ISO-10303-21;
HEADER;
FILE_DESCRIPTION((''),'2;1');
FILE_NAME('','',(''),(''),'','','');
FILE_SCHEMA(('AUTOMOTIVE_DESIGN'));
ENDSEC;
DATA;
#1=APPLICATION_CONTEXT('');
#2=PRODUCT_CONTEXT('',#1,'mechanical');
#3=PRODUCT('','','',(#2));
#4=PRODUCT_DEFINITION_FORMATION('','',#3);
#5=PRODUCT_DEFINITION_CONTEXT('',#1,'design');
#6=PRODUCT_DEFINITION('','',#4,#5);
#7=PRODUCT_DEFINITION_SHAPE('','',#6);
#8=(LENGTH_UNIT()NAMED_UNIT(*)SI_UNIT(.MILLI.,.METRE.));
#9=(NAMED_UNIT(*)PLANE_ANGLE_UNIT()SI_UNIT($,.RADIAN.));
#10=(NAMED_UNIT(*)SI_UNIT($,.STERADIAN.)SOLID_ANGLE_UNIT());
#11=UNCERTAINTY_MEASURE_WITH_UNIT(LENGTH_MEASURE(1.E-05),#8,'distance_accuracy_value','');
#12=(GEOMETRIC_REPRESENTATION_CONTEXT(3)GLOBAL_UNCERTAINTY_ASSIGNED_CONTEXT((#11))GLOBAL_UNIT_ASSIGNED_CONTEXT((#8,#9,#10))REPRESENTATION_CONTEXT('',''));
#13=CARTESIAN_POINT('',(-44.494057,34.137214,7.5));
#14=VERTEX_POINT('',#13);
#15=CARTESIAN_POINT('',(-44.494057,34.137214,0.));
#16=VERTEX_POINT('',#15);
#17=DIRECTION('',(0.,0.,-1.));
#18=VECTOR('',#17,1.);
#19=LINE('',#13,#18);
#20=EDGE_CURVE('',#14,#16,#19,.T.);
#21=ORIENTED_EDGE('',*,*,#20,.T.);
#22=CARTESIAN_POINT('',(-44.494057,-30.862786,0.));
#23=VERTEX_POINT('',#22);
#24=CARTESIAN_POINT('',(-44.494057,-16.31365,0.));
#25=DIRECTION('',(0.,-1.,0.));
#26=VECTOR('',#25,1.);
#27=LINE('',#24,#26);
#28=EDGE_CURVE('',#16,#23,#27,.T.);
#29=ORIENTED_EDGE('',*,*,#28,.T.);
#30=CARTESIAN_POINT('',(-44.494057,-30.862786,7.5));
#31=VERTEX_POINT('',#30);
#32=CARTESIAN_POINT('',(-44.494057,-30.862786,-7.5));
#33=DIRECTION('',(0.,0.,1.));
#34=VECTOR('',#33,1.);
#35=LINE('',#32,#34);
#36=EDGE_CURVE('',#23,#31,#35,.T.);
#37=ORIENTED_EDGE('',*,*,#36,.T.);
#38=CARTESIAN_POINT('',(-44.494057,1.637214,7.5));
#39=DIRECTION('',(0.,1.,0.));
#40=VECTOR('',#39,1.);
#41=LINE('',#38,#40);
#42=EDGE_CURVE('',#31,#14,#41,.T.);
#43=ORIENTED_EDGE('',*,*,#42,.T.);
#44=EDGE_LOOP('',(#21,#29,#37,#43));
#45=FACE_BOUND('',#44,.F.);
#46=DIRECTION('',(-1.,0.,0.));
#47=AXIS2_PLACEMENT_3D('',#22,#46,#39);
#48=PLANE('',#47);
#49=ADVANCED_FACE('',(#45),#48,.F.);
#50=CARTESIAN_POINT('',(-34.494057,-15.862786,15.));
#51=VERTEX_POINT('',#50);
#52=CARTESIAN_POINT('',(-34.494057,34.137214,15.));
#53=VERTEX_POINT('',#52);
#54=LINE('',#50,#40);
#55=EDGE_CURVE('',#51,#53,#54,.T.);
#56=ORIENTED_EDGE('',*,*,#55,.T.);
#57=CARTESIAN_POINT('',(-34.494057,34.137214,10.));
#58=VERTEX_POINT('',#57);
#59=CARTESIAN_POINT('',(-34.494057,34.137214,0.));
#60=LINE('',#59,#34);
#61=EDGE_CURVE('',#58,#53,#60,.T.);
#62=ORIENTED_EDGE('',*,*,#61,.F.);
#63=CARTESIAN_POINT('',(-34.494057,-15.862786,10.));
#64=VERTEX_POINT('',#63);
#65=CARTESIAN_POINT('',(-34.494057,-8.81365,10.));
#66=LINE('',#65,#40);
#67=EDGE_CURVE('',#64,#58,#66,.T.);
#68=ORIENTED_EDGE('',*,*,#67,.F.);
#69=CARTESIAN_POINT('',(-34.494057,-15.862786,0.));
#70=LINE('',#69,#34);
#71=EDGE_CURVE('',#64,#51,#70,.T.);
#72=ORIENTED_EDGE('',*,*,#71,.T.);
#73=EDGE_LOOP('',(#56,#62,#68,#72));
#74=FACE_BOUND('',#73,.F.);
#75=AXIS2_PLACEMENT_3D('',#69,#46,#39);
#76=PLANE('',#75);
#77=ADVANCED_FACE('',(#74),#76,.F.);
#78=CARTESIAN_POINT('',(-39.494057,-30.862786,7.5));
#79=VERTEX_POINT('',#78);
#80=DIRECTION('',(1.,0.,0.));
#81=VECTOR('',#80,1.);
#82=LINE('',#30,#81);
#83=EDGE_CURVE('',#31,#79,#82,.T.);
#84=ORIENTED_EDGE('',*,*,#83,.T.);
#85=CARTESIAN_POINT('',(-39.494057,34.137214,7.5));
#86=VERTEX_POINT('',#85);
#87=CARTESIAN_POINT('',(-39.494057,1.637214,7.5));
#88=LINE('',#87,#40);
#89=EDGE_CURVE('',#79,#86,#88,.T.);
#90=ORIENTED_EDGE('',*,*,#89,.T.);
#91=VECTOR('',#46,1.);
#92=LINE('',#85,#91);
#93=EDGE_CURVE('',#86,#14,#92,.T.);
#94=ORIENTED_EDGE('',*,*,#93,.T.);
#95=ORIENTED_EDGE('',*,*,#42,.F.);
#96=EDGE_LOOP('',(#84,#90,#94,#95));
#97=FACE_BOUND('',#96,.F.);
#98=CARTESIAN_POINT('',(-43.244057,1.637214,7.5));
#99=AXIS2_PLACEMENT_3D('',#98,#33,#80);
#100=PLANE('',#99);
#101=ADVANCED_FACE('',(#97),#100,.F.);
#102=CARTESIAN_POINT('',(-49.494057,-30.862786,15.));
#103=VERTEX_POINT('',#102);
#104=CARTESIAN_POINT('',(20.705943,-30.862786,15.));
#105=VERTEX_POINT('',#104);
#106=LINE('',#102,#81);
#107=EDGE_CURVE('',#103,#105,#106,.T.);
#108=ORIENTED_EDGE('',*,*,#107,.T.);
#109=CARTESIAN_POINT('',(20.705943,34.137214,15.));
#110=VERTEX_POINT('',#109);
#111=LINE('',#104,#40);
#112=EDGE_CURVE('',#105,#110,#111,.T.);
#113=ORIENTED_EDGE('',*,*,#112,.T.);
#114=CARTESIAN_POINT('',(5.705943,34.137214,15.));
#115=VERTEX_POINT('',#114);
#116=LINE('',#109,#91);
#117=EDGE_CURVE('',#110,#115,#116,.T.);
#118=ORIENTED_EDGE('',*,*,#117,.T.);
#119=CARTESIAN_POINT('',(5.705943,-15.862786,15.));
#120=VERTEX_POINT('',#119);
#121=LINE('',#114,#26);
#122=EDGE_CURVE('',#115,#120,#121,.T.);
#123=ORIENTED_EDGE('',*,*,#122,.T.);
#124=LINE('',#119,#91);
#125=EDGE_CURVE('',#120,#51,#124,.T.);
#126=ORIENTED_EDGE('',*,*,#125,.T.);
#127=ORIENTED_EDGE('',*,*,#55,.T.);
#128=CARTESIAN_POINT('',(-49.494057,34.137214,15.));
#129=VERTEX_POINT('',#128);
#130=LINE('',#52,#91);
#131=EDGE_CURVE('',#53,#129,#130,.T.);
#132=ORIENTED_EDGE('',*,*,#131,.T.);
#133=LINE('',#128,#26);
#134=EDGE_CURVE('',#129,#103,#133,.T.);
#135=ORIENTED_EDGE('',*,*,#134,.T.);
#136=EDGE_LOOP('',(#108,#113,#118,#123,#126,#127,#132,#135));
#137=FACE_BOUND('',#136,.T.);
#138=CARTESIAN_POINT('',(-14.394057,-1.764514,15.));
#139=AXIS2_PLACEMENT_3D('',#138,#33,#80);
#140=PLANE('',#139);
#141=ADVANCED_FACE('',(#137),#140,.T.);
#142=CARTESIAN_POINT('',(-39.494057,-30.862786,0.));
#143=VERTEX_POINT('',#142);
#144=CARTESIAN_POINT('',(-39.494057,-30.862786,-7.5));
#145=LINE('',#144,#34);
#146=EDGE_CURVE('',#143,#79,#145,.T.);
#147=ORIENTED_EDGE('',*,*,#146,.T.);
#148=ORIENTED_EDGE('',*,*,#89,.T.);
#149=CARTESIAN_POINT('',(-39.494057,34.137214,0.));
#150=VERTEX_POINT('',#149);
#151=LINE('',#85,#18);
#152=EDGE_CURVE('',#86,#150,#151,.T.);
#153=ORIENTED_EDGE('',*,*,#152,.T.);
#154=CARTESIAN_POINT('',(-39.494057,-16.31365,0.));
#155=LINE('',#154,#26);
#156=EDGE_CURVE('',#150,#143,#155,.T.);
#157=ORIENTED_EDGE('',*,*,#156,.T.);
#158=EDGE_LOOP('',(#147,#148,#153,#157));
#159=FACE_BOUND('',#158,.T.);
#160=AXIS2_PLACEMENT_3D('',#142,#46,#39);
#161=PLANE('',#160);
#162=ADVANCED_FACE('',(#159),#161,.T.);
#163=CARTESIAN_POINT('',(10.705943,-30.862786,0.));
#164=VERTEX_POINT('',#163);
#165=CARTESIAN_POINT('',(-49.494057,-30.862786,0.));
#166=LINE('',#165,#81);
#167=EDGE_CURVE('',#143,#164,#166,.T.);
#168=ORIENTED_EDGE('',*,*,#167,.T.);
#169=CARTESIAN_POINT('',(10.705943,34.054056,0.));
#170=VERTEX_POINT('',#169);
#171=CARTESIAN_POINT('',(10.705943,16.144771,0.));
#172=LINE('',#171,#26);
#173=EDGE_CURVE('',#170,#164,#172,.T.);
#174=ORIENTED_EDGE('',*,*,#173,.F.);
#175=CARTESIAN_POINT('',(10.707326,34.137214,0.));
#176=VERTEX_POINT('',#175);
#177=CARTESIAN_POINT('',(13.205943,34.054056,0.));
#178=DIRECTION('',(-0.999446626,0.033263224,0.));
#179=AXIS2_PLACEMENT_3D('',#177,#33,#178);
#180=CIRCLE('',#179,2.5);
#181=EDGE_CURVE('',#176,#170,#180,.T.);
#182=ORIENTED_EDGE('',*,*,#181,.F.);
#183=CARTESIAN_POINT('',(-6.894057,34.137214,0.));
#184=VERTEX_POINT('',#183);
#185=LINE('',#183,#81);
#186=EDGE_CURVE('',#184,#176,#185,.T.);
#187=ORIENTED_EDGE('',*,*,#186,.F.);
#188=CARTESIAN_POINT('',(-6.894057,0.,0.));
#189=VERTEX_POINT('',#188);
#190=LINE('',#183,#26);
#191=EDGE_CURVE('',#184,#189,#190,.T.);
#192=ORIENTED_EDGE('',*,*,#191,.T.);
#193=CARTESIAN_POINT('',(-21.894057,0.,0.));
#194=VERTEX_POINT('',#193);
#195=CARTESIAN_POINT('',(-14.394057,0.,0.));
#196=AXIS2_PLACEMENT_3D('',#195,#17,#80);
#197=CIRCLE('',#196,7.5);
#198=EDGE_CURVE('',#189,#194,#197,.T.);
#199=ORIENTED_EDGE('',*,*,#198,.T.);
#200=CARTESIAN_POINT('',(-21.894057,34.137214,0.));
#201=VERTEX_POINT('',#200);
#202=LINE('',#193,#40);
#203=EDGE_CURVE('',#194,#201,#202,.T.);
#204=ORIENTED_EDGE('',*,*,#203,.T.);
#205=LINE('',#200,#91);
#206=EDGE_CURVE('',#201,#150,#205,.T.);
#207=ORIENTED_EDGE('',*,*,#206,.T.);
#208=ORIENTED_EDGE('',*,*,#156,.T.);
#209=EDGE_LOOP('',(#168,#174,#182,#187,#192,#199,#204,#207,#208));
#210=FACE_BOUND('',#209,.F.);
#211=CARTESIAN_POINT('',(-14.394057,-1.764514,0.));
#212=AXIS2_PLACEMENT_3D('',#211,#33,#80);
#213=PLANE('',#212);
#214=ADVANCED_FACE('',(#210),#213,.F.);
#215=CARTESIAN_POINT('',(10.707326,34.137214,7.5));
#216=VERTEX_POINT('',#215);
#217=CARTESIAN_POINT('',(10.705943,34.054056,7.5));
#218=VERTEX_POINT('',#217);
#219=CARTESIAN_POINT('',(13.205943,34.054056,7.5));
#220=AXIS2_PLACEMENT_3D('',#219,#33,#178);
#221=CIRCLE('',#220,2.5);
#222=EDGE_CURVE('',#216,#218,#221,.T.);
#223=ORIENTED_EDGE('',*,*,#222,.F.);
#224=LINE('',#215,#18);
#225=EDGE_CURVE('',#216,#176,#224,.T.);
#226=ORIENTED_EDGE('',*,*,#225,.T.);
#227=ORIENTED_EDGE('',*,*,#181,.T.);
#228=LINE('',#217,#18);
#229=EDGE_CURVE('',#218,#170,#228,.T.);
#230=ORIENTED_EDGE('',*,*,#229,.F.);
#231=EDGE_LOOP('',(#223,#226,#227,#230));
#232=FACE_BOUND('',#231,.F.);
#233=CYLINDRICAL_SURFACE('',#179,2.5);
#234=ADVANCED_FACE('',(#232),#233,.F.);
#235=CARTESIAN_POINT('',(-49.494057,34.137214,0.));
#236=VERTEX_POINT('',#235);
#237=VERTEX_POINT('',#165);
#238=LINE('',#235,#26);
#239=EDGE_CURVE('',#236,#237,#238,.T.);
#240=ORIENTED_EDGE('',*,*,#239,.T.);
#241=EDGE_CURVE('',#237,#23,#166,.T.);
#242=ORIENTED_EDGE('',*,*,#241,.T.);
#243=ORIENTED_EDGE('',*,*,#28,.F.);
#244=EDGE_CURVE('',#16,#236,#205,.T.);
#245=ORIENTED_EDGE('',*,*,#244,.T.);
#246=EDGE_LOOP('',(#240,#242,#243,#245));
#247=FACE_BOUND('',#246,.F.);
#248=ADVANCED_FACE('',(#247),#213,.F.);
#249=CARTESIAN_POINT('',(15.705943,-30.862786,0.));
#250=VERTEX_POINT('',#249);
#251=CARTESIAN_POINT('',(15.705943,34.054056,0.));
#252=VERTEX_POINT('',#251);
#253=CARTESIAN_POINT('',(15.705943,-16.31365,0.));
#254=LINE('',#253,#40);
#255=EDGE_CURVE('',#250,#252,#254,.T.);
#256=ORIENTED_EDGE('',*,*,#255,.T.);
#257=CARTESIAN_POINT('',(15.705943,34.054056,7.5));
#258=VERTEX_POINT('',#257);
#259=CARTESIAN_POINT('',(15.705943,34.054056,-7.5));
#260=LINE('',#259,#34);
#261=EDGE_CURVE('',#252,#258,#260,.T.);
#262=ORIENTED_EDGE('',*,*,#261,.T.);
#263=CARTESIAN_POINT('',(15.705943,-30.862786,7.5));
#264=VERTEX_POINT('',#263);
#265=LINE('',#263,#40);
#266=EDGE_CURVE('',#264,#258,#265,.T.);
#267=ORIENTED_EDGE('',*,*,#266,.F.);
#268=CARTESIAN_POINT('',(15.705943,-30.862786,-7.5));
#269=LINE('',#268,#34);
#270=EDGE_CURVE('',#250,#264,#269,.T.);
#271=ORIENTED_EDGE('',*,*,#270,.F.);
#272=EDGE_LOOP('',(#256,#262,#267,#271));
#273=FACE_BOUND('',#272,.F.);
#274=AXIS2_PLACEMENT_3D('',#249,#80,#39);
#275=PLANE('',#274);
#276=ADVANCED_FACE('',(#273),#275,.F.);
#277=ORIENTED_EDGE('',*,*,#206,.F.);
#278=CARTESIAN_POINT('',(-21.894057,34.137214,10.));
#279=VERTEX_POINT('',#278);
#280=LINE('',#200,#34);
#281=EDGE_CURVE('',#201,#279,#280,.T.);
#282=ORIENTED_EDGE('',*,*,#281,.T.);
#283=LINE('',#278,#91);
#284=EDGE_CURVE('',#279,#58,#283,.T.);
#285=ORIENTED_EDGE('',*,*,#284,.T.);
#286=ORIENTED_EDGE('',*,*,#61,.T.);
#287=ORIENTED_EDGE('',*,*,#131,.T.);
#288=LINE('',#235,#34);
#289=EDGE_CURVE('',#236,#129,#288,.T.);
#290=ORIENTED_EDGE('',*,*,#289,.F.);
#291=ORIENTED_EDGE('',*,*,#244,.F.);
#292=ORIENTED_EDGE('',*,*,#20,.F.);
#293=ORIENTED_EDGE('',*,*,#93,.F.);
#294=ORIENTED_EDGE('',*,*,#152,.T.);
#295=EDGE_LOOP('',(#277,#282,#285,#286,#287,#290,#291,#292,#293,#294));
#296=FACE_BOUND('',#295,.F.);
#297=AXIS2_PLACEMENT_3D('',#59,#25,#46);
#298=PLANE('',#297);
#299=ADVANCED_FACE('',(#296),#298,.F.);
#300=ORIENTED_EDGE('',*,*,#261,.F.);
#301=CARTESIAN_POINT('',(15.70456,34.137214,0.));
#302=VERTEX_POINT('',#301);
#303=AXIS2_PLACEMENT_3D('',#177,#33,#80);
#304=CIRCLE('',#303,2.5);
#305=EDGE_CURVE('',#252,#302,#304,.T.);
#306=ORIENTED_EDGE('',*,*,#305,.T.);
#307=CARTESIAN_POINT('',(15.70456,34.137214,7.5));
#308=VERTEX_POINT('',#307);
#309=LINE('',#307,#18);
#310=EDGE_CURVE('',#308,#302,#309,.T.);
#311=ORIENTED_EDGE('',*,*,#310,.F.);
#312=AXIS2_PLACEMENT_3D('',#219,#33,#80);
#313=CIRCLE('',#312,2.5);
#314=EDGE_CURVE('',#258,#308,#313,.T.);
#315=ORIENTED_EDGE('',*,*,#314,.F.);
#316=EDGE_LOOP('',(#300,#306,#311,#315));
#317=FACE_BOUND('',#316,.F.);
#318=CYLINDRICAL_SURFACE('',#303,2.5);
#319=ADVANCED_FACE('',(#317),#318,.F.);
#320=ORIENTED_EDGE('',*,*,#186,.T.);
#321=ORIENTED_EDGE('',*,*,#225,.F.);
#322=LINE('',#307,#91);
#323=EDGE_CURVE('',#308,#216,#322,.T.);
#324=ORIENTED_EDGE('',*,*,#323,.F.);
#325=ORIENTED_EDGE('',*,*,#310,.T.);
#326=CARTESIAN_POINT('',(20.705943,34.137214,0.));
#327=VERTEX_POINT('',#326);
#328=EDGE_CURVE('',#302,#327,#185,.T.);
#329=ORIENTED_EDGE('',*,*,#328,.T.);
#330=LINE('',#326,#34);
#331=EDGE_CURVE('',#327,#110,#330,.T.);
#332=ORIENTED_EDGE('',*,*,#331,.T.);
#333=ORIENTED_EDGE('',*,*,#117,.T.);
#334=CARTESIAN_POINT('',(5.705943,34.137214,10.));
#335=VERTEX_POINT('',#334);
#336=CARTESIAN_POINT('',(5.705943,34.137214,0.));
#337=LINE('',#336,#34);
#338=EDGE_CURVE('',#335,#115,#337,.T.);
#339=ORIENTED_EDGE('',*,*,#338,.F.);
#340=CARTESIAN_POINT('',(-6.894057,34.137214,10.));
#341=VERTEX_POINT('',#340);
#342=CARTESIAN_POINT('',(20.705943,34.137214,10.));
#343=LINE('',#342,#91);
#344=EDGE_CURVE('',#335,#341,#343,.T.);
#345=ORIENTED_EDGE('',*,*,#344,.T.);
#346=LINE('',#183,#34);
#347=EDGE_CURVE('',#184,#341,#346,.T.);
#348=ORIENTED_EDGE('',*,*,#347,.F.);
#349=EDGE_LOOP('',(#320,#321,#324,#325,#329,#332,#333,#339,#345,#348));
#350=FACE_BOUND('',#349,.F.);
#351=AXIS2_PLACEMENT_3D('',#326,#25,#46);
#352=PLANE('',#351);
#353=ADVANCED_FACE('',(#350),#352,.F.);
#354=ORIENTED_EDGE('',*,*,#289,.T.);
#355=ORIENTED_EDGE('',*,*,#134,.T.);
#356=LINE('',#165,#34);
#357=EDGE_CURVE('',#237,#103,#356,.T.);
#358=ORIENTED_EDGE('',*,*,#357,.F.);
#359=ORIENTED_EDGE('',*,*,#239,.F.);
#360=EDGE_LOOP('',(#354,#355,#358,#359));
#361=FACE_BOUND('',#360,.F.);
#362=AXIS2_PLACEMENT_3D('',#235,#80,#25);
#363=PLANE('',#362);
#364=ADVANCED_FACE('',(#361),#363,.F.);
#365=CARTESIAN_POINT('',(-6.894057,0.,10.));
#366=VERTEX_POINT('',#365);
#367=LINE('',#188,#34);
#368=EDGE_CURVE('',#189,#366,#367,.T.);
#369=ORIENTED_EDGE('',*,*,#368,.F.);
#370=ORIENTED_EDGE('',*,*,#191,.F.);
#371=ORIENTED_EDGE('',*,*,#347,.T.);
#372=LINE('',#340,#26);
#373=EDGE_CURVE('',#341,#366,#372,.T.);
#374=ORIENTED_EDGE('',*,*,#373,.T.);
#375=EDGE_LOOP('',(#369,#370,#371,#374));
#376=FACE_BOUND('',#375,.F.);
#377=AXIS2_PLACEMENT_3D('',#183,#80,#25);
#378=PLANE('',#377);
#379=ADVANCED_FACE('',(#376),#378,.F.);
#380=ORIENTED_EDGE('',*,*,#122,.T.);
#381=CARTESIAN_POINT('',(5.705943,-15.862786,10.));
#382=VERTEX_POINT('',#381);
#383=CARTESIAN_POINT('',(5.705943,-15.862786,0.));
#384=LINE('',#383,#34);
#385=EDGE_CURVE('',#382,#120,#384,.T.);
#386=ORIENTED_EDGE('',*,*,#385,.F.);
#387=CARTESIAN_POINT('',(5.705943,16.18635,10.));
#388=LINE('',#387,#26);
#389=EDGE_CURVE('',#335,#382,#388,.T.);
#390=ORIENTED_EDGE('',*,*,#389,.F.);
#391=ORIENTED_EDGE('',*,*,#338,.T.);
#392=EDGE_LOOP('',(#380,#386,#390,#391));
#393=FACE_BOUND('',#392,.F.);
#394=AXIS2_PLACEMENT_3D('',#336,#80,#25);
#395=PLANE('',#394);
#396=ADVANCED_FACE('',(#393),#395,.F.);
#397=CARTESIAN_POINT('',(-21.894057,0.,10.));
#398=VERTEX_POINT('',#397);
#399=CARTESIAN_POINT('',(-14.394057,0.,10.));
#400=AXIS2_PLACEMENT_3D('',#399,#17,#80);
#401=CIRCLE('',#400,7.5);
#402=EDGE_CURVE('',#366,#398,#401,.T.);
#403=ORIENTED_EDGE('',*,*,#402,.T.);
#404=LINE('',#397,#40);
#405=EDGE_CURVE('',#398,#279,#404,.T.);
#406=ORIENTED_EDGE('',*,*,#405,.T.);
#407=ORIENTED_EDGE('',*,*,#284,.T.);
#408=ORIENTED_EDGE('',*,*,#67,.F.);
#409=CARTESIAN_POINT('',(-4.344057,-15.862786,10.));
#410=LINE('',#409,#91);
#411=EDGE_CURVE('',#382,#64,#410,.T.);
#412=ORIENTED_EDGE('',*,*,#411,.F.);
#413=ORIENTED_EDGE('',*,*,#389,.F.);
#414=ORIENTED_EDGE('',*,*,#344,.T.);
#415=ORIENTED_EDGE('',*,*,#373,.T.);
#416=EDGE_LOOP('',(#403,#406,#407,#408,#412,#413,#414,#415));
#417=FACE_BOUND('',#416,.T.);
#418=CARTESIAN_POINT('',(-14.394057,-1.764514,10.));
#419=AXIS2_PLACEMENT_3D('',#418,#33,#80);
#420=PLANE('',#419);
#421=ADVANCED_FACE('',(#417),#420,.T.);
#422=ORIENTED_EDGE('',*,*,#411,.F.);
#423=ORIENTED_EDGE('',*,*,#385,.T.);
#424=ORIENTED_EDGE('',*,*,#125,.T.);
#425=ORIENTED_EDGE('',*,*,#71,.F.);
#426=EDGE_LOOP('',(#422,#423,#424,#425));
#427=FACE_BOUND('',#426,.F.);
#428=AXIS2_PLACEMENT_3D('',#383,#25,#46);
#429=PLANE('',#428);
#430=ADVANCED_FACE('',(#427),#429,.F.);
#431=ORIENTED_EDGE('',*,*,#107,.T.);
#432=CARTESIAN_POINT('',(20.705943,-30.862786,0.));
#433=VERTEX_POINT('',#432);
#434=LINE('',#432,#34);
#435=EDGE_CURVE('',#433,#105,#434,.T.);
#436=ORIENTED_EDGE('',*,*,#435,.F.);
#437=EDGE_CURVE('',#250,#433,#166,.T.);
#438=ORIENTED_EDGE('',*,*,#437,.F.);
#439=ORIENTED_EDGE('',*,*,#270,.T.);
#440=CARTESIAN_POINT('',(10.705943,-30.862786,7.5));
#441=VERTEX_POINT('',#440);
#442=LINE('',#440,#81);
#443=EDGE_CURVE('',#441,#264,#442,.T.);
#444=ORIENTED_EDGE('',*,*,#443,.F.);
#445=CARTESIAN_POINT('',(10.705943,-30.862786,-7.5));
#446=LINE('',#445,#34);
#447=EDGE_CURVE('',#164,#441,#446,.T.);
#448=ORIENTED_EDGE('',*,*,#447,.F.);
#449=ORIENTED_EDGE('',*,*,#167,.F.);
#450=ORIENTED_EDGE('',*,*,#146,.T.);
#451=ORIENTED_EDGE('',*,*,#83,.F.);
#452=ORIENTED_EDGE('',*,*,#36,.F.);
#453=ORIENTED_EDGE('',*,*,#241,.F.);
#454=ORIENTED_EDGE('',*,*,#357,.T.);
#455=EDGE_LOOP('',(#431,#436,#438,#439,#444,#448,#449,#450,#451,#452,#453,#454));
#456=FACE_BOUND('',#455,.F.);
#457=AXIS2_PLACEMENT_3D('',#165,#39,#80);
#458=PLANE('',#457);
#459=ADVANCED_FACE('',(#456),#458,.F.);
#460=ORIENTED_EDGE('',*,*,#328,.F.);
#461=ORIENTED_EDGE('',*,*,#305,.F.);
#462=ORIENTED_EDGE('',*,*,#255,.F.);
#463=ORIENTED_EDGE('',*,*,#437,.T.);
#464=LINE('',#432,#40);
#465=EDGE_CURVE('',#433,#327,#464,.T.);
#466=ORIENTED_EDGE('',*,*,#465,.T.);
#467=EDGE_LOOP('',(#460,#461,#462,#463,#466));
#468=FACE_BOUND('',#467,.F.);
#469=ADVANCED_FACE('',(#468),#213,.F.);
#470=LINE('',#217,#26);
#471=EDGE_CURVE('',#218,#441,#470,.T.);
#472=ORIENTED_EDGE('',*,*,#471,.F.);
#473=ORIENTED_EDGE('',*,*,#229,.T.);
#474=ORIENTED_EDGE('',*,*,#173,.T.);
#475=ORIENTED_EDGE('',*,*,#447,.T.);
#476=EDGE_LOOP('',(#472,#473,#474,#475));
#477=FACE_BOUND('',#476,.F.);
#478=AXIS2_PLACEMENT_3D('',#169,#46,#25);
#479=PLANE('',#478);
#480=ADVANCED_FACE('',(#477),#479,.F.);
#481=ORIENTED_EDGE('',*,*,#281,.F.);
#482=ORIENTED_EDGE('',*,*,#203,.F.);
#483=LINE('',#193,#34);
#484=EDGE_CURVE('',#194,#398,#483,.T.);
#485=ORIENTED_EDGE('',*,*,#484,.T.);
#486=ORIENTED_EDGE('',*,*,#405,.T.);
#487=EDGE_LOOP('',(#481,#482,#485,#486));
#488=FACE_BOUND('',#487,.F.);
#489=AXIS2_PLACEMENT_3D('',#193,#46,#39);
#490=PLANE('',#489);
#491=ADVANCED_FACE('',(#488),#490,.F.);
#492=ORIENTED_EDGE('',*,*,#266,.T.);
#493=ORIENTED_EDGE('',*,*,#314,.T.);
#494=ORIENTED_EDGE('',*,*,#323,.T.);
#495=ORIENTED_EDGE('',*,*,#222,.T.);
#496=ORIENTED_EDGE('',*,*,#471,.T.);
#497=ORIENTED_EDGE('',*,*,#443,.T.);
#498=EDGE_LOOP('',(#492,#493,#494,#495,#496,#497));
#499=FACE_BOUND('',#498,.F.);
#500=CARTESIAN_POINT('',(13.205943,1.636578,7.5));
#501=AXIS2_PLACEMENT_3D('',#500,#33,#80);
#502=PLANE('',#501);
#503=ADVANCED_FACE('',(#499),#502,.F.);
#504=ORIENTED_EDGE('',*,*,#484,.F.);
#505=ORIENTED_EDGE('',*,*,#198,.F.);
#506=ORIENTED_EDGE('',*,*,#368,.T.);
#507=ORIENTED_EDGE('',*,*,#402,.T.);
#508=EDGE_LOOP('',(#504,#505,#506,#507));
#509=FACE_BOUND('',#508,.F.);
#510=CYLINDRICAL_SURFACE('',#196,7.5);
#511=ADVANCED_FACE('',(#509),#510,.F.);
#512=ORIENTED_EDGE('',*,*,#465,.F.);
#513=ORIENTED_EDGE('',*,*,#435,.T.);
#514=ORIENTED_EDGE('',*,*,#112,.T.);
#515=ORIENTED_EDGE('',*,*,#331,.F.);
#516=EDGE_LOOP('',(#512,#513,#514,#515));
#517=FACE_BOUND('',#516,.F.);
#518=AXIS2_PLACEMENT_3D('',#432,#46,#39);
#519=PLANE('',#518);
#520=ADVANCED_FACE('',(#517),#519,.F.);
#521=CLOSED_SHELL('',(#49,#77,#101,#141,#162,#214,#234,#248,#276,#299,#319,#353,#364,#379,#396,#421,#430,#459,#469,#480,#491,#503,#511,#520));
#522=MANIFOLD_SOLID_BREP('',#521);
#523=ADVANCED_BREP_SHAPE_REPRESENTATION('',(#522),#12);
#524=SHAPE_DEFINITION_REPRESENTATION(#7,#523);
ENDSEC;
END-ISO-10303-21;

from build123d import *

# Parameters (mm, degrees)
F1_DEPTH = 15
F2_DEPTH = 10
F3_W     = 2.5
F3_H     = 65
F4_DEPTH = 7.5


with BuildPart() as f1:
    # F0 (on Top) → F1 (new body)
    with BuildSketch(Plane.XY):
        Polygon((-34.4940570078, 34.1372138634), (-49.4940570078, 34.1372138634), (-49.4940570078, -30.8627861366), (20.7059429922, -30.8627861366), (20.7059429922, 34.1372138634), (5.7059429922, 34.1372138634), (5.7059429922, -15.8627861366), (-34.4940570078, -15.8627861366), align=None)
    extrude(amount=F1_DEPTH)

    # F0 (on Top) → F2 (join)
    with BuildSketch(Plane.XY):
        Polygon((-34.4940570078, 34.1372138634), (-49.4940570078, 34.1372138634), (-49.4940570078, -30.8627861366), (20.7059429922, -30.8627861366), (20.7059429922, 34.1372138634), (5.7059429922, 34.1372138634), (5.7059429922, -15.8627861366), (-34.4940570078, -15.8627861366), align=None)
        with BuildLine():
            Line((-21.8940570078, 34.1372138634), (-34.4940570078, 34.1372138634))
            Line((-34.4940570078, 34.1372138634), (-34.4940570078, -15.8627861366))
            Line((-34.4940570078, -15.8627861366), (5.7059429922, -15.8627861366))
            Line((5.7059429922, -15.8627861366), (5.7059429922, 34.1372138634))
            Line((5.7059429922, 34.1372138634), (-6.8940570078, 34.1372138634))
            Line((-6.8940570078, 34.1372138634), (-6.8940570078, 0))
            ThreePointArc((-6.8940570078, 0), (-14.3940570078, -7.5), (-21.8940570078, 0))
            Line((-21.8940570078, 0), (-21.8940570078, 34.1372138634))
        make_face()
    extrude(amount=F2_DEPTH)

    # F3 (on face) → F4 (cut, symmetric)
    with BuildSketch(Plane.XY):
        with Locations((-43.2440570078, 1.6372138634)):
            Rectangle(F3_W, F3_H)
        with Locations((-40.7440570078, 1.6372138634)):
            Rectangle(F3_W, F3_H)
        with BuildLine():
            Line((10.7059429922, 34.05405581), (10.7059429922, -30.8627861366))
            Line((10.7059429922, -30.8627861366), (13.2059429922, -30.8627861366))
            Line((13.2059429922, -30.8627861366), (15.7059429922, -30.8627861366))
            Line((15.7059429922, -30.8627861366), (15.7059429922, 34.05405581))
            ThreePointArc((15.7059429922, 34.05405581), (15.7055971095, 34.0956405901), (15.7045595571, 34.1372138634))
            Line((15.7045595571, 34.1372138634), (10.7073264274, 34.1372138634))
            ThreePointArc((10.7073264274, 34.1372138634), (10.7062888749, 34.0956405901), (10.7059429922, 34.05405581))
        make_face()
    extrude(amount=F4_DEPTH, both=True, mode=Mode.SUBTRACT)


solid = f1.part
